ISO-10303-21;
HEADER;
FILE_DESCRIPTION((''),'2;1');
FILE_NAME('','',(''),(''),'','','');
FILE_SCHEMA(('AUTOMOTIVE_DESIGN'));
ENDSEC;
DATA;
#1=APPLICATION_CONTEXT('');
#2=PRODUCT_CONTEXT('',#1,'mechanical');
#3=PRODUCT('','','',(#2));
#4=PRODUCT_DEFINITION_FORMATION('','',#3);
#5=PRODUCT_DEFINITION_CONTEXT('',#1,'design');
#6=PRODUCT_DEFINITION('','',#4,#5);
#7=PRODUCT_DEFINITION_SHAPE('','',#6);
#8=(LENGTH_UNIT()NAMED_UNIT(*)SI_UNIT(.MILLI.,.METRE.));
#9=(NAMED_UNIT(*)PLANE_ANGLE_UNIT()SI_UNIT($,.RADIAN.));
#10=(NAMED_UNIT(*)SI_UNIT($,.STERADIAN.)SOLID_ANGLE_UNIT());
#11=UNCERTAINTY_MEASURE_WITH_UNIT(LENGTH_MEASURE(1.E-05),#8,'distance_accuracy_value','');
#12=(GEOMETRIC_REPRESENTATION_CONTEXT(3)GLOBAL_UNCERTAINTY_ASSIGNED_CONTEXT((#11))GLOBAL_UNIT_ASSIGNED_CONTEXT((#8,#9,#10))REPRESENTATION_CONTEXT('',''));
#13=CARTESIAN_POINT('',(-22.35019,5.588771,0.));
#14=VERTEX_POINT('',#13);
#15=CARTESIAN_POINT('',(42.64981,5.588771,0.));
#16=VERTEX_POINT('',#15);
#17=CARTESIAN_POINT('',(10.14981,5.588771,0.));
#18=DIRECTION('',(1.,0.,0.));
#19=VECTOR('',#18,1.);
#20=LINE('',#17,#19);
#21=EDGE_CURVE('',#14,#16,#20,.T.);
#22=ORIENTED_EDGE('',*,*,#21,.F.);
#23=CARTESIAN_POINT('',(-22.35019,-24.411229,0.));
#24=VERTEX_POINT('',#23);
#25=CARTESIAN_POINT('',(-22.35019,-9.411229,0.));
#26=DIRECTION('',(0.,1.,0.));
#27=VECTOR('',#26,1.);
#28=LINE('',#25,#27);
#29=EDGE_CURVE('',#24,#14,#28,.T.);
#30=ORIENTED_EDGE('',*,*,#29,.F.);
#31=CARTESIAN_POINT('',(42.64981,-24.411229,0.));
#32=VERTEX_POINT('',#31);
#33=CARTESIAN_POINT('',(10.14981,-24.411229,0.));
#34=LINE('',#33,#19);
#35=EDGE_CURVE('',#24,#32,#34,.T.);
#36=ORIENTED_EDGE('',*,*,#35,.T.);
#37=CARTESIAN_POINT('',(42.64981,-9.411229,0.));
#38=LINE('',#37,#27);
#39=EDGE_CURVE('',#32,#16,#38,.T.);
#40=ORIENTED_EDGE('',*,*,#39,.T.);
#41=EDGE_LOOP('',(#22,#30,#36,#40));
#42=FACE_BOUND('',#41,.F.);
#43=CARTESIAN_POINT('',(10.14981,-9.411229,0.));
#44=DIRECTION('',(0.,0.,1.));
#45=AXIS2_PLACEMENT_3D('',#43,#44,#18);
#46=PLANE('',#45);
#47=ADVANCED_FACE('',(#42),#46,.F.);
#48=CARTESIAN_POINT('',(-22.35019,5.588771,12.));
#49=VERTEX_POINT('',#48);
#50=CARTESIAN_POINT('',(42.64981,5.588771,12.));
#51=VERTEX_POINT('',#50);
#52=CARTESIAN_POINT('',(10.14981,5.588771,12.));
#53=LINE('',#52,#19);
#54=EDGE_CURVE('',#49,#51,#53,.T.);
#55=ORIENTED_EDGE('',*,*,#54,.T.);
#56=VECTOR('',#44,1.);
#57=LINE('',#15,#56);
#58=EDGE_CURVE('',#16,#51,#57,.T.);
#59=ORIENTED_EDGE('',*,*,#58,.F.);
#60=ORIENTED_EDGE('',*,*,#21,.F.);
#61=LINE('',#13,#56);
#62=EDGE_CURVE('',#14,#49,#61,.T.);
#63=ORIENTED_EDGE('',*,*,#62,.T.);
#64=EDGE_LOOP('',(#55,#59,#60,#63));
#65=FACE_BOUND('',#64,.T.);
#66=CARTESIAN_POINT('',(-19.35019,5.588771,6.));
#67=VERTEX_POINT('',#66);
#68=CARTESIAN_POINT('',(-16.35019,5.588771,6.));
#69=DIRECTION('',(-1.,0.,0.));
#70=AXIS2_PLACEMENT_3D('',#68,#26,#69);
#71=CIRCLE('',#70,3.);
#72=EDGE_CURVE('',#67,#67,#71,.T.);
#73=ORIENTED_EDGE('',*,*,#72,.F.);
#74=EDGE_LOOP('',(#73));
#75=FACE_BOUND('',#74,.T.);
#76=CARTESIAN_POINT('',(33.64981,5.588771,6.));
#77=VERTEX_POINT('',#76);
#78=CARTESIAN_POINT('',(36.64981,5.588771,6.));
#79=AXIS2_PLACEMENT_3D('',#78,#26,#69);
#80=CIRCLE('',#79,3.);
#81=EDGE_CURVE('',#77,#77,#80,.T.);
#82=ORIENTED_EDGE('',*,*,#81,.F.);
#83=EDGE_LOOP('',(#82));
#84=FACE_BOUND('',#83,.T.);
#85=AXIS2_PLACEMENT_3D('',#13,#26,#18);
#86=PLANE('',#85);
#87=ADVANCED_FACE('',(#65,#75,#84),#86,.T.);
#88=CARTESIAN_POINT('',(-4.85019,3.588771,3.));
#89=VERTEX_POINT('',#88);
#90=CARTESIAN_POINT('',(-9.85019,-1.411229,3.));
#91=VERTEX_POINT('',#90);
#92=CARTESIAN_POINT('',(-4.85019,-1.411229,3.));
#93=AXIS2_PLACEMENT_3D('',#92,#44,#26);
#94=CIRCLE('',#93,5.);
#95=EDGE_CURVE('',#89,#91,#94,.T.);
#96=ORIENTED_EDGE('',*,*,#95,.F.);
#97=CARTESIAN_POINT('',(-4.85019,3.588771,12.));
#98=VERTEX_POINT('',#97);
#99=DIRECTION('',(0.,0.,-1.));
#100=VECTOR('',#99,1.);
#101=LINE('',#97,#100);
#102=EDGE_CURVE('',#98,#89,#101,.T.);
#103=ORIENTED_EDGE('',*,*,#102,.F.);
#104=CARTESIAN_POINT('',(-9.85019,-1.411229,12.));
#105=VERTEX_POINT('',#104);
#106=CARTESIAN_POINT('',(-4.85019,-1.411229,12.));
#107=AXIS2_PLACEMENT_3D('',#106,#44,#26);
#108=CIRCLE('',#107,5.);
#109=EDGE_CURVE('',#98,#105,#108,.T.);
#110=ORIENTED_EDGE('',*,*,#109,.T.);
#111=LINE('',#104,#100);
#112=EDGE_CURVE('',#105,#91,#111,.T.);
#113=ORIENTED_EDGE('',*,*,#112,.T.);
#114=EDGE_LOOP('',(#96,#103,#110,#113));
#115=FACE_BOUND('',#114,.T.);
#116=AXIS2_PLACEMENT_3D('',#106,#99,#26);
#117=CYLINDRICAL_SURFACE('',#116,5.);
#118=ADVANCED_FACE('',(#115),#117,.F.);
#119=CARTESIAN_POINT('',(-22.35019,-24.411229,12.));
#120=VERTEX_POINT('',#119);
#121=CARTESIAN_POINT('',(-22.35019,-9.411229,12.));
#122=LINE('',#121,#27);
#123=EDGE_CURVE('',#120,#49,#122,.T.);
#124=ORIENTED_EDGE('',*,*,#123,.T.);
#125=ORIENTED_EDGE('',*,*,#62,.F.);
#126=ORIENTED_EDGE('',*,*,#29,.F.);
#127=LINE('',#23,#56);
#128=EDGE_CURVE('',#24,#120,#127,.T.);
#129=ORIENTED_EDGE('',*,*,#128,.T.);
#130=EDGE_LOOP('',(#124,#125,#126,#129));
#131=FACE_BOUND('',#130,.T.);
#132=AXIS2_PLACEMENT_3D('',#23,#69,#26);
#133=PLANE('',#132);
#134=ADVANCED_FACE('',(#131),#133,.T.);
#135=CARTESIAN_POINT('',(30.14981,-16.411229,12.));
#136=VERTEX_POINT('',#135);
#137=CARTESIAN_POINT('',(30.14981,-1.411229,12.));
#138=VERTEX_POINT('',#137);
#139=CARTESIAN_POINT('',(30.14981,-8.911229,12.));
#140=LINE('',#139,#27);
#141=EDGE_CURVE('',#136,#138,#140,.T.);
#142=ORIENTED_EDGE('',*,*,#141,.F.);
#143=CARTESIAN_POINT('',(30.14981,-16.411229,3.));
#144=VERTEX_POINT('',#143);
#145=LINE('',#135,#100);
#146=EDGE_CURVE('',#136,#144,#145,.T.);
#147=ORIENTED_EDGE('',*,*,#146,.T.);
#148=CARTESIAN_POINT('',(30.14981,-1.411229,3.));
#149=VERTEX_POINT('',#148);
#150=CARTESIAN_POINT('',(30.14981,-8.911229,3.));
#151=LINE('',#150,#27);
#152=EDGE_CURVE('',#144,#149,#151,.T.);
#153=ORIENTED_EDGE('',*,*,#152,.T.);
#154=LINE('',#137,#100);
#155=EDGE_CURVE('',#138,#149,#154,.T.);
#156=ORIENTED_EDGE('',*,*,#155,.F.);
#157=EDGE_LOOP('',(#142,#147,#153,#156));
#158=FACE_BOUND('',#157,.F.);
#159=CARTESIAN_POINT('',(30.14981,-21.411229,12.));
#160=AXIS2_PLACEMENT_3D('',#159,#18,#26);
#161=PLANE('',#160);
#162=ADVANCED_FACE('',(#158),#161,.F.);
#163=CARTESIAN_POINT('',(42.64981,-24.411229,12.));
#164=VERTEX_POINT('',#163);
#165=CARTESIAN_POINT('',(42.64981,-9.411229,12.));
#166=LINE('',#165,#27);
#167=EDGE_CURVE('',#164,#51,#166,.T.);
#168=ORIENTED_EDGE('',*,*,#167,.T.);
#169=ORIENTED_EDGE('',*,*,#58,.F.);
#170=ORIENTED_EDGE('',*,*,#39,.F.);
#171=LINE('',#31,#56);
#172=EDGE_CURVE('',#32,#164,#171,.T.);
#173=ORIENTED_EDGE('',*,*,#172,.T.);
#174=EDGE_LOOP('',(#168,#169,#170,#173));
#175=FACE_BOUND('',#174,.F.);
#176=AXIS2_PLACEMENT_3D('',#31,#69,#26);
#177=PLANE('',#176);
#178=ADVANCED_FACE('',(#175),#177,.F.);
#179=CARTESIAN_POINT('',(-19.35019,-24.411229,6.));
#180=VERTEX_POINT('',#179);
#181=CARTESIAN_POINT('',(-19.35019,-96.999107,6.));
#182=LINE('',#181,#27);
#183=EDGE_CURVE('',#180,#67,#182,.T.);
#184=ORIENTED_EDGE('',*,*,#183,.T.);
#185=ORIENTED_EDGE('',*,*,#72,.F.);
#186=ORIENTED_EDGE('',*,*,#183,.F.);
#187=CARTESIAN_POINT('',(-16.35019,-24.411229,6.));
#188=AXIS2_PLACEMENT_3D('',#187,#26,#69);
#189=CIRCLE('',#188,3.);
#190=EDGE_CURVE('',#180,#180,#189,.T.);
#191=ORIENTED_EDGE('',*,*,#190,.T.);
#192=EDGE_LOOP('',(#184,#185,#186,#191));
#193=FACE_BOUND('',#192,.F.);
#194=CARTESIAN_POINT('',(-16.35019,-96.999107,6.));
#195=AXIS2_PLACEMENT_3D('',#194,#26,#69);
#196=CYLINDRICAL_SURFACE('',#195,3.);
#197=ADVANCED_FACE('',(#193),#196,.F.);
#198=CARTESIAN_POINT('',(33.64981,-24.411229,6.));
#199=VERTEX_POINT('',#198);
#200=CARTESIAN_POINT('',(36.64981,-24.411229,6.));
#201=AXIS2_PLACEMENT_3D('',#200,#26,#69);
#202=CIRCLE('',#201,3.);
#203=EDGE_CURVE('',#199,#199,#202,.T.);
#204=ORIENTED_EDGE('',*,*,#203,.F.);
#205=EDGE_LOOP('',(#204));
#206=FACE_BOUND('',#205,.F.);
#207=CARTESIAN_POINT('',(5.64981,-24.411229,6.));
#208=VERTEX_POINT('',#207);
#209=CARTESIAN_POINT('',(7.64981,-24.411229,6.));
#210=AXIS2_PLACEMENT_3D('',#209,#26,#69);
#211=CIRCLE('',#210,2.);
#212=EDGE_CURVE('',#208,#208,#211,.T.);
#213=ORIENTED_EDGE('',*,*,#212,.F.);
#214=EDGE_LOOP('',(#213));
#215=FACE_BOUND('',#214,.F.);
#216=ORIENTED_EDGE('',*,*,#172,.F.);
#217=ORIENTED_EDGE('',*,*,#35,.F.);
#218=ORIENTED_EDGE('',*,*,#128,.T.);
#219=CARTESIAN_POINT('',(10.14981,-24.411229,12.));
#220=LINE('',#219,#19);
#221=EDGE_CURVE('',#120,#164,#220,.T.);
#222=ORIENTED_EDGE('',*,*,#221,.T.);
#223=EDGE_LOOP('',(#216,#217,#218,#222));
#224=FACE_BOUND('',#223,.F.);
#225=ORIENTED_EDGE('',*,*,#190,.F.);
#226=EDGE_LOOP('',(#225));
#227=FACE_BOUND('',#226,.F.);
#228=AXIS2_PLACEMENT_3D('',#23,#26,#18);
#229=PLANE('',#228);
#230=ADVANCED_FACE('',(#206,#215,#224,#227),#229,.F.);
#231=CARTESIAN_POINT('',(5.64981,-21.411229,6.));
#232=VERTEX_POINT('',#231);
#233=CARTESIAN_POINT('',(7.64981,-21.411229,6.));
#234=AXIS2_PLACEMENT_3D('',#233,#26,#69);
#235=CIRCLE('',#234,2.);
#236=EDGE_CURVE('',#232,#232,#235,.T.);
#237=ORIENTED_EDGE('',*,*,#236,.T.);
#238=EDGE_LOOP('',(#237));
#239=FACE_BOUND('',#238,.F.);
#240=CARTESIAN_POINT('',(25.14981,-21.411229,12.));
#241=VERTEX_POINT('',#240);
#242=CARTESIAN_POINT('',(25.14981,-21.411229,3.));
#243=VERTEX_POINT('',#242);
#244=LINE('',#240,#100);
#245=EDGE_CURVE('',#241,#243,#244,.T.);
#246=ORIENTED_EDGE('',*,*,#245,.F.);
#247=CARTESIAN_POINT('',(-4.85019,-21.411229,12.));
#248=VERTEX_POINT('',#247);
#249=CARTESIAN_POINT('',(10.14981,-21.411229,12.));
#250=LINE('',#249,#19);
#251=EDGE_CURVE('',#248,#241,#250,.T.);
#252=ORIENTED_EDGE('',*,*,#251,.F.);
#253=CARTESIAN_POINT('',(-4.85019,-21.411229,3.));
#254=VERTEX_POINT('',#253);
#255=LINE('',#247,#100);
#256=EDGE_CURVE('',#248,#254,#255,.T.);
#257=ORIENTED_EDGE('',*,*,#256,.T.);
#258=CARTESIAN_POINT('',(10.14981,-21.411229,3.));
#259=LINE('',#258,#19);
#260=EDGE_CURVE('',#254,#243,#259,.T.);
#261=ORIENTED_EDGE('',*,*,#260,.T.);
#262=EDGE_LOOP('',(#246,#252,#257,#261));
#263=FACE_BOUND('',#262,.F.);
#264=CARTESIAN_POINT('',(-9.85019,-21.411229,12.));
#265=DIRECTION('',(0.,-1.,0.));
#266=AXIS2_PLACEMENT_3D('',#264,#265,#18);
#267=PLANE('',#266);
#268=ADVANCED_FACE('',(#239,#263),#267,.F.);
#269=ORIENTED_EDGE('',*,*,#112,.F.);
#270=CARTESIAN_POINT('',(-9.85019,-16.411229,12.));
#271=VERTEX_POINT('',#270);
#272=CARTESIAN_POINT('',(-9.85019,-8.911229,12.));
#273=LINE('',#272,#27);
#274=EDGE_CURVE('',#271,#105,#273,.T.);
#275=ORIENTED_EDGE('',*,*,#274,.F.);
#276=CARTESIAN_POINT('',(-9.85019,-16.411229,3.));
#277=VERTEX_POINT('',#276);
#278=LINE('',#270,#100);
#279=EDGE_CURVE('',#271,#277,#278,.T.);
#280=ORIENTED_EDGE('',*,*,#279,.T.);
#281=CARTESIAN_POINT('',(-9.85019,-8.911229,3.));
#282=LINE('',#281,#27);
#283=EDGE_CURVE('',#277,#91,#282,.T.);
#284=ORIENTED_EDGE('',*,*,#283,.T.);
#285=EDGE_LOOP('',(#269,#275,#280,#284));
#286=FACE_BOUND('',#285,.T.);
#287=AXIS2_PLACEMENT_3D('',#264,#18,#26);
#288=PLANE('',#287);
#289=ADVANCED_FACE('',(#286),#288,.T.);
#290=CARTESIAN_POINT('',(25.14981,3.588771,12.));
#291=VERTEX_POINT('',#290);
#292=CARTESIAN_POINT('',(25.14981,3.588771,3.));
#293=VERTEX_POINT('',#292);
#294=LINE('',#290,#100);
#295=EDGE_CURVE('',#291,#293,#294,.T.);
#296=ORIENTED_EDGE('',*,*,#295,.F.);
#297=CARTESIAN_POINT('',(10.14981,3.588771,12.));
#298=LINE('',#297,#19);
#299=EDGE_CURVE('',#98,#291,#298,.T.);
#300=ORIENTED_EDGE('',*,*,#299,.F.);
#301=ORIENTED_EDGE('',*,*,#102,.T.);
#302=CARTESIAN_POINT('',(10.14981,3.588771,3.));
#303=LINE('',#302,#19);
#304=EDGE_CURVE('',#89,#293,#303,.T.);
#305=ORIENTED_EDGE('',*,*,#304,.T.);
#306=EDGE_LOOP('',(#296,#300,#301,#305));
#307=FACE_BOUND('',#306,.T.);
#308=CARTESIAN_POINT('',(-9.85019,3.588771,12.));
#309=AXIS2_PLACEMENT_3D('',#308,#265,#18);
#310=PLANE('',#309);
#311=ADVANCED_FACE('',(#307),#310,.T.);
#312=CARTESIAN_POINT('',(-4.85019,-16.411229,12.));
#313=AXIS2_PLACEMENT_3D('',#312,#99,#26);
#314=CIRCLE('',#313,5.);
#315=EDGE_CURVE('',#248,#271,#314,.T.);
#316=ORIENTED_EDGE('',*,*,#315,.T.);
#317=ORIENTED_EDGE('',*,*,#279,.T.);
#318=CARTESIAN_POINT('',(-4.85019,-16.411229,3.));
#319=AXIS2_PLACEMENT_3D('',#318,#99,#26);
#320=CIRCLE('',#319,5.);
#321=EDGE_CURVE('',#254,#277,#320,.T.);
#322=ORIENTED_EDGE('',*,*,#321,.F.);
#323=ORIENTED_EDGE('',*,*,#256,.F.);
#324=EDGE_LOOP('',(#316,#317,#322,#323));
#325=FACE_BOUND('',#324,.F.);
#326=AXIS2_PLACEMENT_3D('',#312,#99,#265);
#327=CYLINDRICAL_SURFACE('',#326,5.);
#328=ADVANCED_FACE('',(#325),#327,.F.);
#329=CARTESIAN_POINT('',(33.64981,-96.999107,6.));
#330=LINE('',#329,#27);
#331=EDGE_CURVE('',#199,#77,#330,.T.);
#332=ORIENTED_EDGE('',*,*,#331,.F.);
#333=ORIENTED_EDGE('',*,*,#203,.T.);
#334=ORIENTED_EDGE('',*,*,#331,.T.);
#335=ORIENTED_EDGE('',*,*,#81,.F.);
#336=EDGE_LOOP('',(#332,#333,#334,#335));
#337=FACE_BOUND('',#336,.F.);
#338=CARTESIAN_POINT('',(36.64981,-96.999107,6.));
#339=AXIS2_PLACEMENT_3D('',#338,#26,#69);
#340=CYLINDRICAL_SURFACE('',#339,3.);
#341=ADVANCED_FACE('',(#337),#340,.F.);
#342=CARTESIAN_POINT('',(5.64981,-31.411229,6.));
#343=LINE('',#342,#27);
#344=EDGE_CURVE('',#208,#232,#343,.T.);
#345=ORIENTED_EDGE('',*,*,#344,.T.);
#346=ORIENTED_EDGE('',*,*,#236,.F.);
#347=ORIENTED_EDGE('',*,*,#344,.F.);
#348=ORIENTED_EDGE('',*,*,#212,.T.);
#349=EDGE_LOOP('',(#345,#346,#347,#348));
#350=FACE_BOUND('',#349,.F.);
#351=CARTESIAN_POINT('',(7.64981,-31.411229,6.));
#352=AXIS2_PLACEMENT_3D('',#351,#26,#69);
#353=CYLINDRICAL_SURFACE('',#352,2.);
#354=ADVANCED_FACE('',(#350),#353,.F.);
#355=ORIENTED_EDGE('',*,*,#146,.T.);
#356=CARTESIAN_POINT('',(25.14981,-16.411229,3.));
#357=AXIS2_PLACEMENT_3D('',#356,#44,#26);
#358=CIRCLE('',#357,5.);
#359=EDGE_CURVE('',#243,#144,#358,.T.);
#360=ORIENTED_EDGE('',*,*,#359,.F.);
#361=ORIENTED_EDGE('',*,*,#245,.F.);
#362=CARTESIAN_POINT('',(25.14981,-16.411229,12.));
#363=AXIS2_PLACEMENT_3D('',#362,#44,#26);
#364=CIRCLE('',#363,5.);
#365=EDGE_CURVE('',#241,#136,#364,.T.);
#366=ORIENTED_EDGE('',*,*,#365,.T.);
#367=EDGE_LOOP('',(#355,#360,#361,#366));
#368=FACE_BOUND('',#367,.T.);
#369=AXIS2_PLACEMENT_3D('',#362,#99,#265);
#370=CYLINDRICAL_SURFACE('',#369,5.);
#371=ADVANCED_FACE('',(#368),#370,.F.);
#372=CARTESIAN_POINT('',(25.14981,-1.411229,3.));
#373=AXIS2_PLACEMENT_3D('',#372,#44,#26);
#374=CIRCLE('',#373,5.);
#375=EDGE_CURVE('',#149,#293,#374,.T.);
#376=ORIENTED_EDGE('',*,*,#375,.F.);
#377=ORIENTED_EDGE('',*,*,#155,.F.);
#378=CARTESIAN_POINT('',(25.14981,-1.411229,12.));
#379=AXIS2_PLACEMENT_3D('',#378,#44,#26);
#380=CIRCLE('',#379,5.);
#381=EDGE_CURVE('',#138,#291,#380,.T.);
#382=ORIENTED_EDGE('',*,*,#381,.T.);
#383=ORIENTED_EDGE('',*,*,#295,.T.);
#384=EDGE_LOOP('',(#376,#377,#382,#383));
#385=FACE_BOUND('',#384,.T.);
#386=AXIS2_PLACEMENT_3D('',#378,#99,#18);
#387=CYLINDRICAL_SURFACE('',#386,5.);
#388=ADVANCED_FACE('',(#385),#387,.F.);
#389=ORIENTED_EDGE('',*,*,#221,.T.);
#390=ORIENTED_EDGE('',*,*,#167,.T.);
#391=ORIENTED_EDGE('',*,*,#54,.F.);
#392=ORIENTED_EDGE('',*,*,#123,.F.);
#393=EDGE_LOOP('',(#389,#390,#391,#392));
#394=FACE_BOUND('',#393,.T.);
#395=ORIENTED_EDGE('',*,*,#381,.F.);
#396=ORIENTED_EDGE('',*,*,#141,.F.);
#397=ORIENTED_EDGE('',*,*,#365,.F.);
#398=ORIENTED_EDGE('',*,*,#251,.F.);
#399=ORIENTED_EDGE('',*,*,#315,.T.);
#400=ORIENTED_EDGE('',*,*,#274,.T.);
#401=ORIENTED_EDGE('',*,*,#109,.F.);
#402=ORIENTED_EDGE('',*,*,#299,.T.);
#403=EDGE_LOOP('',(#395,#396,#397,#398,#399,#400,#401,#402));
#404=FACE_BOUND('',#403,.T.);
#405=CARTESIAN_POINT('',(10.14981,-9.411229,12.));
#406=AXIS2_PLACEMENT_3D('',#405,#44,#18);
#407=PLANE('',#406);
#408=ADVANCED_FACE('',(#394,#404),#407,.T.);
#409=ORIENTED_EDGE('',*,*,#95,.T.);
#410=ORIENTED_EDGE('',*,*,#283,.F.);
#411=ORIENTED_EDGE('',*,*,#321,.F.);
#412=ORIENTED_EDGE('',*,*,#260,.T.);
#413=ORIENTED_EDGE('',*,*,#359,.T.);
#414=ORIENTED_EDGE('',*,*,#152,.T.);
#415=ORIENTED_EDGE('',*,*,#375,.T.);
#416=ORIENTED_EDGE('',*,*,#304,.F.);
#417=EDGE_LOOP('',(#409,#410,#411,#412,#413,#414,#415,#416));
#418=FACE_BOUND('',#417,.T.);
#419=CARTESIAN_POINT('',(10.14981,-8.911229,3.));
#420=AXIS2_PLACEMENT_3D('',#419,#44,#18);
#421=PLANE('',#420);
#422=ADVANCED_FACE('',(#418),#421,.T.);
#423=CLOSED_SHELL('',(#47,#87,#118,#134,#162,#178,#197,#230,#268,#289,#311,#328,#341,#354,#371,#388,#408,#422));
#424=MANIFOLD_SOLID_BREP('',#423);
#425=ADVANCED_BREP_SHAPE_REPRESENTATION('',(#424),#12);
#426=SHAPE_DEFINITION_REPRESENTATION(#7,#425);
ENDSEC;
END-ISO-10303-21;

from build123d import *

# Parameters (mm, degrees)
F0_W     = 65
F0_H     = 30
F1_DEPTH = 12
F4_D     = 6
F5_D     = 6
F6_W     = 40
F6_H     = 25
F7_DEPTH = 9
F8_R     = 5
F9_D     = 4
F9_DEPTH = 7
F9_TIP   = 1.2017212381


# Not quite as in the source:
# - a feature names something its author has since deleted; it is built from what else it names


with BuildPart() as f1:
    # F0 (on Top) → F1 (new body)
    with BuildSketch(Plane.XY):
        with Locations((10.1498100485, -9.411229075)):
            Rectangle(F0_W, F0_H)
    extrude(amount=F1_DEPTH)

    # F4 (through all)
    with Locations(Plane.XZ.offset(24.411229075)):
        with Locations((36.6498100485, 6)):
            Hole(F4_D / 2)

    # F5 (through all)
    with Locations(Plane.XZ.offset(24.411229075)):
        with Locations((-16.3501899515, 6)):
            Hole(F5_D / 2)

    # F6 (on face) → F7 (cut)
    with BuildSketch(Plane.XY.offset(12)):
        with Locations((10.1498100485, -8.911229075)):
            Rectangle(F6_W, F6_H)
    extrude(amount=-F7_DEPTH, mode=Mode.SUBTRACT)

    # F8
    f8_edges = [f1.edges().sort_by_distance(p)[0] for p in [
        (-9.85019, 3.588771, 7.5),
        (-9.85019, -21.411229, 7.5),
        (30.14981, 3.588771, 7.5),
        (30.14981, -21.411229, 7.5),
    ]]
    fillet(f8_edges, radius=F8_R)

    # F9
    with Locations(Plane.XZ.offset(24.411229075)):
        with Locations((7.6498100485, 6)):
            Hole(F9_D / 2, depth=F9_DEPTH)
            with Locations((0, 0, -(F9_DEPTH + F9_TIP / 2))):  # 118° drill point
                Cone(0, F9_D / 2, F9_TIP, mode=Mode.SUBTRACT)


solid = f1.part
